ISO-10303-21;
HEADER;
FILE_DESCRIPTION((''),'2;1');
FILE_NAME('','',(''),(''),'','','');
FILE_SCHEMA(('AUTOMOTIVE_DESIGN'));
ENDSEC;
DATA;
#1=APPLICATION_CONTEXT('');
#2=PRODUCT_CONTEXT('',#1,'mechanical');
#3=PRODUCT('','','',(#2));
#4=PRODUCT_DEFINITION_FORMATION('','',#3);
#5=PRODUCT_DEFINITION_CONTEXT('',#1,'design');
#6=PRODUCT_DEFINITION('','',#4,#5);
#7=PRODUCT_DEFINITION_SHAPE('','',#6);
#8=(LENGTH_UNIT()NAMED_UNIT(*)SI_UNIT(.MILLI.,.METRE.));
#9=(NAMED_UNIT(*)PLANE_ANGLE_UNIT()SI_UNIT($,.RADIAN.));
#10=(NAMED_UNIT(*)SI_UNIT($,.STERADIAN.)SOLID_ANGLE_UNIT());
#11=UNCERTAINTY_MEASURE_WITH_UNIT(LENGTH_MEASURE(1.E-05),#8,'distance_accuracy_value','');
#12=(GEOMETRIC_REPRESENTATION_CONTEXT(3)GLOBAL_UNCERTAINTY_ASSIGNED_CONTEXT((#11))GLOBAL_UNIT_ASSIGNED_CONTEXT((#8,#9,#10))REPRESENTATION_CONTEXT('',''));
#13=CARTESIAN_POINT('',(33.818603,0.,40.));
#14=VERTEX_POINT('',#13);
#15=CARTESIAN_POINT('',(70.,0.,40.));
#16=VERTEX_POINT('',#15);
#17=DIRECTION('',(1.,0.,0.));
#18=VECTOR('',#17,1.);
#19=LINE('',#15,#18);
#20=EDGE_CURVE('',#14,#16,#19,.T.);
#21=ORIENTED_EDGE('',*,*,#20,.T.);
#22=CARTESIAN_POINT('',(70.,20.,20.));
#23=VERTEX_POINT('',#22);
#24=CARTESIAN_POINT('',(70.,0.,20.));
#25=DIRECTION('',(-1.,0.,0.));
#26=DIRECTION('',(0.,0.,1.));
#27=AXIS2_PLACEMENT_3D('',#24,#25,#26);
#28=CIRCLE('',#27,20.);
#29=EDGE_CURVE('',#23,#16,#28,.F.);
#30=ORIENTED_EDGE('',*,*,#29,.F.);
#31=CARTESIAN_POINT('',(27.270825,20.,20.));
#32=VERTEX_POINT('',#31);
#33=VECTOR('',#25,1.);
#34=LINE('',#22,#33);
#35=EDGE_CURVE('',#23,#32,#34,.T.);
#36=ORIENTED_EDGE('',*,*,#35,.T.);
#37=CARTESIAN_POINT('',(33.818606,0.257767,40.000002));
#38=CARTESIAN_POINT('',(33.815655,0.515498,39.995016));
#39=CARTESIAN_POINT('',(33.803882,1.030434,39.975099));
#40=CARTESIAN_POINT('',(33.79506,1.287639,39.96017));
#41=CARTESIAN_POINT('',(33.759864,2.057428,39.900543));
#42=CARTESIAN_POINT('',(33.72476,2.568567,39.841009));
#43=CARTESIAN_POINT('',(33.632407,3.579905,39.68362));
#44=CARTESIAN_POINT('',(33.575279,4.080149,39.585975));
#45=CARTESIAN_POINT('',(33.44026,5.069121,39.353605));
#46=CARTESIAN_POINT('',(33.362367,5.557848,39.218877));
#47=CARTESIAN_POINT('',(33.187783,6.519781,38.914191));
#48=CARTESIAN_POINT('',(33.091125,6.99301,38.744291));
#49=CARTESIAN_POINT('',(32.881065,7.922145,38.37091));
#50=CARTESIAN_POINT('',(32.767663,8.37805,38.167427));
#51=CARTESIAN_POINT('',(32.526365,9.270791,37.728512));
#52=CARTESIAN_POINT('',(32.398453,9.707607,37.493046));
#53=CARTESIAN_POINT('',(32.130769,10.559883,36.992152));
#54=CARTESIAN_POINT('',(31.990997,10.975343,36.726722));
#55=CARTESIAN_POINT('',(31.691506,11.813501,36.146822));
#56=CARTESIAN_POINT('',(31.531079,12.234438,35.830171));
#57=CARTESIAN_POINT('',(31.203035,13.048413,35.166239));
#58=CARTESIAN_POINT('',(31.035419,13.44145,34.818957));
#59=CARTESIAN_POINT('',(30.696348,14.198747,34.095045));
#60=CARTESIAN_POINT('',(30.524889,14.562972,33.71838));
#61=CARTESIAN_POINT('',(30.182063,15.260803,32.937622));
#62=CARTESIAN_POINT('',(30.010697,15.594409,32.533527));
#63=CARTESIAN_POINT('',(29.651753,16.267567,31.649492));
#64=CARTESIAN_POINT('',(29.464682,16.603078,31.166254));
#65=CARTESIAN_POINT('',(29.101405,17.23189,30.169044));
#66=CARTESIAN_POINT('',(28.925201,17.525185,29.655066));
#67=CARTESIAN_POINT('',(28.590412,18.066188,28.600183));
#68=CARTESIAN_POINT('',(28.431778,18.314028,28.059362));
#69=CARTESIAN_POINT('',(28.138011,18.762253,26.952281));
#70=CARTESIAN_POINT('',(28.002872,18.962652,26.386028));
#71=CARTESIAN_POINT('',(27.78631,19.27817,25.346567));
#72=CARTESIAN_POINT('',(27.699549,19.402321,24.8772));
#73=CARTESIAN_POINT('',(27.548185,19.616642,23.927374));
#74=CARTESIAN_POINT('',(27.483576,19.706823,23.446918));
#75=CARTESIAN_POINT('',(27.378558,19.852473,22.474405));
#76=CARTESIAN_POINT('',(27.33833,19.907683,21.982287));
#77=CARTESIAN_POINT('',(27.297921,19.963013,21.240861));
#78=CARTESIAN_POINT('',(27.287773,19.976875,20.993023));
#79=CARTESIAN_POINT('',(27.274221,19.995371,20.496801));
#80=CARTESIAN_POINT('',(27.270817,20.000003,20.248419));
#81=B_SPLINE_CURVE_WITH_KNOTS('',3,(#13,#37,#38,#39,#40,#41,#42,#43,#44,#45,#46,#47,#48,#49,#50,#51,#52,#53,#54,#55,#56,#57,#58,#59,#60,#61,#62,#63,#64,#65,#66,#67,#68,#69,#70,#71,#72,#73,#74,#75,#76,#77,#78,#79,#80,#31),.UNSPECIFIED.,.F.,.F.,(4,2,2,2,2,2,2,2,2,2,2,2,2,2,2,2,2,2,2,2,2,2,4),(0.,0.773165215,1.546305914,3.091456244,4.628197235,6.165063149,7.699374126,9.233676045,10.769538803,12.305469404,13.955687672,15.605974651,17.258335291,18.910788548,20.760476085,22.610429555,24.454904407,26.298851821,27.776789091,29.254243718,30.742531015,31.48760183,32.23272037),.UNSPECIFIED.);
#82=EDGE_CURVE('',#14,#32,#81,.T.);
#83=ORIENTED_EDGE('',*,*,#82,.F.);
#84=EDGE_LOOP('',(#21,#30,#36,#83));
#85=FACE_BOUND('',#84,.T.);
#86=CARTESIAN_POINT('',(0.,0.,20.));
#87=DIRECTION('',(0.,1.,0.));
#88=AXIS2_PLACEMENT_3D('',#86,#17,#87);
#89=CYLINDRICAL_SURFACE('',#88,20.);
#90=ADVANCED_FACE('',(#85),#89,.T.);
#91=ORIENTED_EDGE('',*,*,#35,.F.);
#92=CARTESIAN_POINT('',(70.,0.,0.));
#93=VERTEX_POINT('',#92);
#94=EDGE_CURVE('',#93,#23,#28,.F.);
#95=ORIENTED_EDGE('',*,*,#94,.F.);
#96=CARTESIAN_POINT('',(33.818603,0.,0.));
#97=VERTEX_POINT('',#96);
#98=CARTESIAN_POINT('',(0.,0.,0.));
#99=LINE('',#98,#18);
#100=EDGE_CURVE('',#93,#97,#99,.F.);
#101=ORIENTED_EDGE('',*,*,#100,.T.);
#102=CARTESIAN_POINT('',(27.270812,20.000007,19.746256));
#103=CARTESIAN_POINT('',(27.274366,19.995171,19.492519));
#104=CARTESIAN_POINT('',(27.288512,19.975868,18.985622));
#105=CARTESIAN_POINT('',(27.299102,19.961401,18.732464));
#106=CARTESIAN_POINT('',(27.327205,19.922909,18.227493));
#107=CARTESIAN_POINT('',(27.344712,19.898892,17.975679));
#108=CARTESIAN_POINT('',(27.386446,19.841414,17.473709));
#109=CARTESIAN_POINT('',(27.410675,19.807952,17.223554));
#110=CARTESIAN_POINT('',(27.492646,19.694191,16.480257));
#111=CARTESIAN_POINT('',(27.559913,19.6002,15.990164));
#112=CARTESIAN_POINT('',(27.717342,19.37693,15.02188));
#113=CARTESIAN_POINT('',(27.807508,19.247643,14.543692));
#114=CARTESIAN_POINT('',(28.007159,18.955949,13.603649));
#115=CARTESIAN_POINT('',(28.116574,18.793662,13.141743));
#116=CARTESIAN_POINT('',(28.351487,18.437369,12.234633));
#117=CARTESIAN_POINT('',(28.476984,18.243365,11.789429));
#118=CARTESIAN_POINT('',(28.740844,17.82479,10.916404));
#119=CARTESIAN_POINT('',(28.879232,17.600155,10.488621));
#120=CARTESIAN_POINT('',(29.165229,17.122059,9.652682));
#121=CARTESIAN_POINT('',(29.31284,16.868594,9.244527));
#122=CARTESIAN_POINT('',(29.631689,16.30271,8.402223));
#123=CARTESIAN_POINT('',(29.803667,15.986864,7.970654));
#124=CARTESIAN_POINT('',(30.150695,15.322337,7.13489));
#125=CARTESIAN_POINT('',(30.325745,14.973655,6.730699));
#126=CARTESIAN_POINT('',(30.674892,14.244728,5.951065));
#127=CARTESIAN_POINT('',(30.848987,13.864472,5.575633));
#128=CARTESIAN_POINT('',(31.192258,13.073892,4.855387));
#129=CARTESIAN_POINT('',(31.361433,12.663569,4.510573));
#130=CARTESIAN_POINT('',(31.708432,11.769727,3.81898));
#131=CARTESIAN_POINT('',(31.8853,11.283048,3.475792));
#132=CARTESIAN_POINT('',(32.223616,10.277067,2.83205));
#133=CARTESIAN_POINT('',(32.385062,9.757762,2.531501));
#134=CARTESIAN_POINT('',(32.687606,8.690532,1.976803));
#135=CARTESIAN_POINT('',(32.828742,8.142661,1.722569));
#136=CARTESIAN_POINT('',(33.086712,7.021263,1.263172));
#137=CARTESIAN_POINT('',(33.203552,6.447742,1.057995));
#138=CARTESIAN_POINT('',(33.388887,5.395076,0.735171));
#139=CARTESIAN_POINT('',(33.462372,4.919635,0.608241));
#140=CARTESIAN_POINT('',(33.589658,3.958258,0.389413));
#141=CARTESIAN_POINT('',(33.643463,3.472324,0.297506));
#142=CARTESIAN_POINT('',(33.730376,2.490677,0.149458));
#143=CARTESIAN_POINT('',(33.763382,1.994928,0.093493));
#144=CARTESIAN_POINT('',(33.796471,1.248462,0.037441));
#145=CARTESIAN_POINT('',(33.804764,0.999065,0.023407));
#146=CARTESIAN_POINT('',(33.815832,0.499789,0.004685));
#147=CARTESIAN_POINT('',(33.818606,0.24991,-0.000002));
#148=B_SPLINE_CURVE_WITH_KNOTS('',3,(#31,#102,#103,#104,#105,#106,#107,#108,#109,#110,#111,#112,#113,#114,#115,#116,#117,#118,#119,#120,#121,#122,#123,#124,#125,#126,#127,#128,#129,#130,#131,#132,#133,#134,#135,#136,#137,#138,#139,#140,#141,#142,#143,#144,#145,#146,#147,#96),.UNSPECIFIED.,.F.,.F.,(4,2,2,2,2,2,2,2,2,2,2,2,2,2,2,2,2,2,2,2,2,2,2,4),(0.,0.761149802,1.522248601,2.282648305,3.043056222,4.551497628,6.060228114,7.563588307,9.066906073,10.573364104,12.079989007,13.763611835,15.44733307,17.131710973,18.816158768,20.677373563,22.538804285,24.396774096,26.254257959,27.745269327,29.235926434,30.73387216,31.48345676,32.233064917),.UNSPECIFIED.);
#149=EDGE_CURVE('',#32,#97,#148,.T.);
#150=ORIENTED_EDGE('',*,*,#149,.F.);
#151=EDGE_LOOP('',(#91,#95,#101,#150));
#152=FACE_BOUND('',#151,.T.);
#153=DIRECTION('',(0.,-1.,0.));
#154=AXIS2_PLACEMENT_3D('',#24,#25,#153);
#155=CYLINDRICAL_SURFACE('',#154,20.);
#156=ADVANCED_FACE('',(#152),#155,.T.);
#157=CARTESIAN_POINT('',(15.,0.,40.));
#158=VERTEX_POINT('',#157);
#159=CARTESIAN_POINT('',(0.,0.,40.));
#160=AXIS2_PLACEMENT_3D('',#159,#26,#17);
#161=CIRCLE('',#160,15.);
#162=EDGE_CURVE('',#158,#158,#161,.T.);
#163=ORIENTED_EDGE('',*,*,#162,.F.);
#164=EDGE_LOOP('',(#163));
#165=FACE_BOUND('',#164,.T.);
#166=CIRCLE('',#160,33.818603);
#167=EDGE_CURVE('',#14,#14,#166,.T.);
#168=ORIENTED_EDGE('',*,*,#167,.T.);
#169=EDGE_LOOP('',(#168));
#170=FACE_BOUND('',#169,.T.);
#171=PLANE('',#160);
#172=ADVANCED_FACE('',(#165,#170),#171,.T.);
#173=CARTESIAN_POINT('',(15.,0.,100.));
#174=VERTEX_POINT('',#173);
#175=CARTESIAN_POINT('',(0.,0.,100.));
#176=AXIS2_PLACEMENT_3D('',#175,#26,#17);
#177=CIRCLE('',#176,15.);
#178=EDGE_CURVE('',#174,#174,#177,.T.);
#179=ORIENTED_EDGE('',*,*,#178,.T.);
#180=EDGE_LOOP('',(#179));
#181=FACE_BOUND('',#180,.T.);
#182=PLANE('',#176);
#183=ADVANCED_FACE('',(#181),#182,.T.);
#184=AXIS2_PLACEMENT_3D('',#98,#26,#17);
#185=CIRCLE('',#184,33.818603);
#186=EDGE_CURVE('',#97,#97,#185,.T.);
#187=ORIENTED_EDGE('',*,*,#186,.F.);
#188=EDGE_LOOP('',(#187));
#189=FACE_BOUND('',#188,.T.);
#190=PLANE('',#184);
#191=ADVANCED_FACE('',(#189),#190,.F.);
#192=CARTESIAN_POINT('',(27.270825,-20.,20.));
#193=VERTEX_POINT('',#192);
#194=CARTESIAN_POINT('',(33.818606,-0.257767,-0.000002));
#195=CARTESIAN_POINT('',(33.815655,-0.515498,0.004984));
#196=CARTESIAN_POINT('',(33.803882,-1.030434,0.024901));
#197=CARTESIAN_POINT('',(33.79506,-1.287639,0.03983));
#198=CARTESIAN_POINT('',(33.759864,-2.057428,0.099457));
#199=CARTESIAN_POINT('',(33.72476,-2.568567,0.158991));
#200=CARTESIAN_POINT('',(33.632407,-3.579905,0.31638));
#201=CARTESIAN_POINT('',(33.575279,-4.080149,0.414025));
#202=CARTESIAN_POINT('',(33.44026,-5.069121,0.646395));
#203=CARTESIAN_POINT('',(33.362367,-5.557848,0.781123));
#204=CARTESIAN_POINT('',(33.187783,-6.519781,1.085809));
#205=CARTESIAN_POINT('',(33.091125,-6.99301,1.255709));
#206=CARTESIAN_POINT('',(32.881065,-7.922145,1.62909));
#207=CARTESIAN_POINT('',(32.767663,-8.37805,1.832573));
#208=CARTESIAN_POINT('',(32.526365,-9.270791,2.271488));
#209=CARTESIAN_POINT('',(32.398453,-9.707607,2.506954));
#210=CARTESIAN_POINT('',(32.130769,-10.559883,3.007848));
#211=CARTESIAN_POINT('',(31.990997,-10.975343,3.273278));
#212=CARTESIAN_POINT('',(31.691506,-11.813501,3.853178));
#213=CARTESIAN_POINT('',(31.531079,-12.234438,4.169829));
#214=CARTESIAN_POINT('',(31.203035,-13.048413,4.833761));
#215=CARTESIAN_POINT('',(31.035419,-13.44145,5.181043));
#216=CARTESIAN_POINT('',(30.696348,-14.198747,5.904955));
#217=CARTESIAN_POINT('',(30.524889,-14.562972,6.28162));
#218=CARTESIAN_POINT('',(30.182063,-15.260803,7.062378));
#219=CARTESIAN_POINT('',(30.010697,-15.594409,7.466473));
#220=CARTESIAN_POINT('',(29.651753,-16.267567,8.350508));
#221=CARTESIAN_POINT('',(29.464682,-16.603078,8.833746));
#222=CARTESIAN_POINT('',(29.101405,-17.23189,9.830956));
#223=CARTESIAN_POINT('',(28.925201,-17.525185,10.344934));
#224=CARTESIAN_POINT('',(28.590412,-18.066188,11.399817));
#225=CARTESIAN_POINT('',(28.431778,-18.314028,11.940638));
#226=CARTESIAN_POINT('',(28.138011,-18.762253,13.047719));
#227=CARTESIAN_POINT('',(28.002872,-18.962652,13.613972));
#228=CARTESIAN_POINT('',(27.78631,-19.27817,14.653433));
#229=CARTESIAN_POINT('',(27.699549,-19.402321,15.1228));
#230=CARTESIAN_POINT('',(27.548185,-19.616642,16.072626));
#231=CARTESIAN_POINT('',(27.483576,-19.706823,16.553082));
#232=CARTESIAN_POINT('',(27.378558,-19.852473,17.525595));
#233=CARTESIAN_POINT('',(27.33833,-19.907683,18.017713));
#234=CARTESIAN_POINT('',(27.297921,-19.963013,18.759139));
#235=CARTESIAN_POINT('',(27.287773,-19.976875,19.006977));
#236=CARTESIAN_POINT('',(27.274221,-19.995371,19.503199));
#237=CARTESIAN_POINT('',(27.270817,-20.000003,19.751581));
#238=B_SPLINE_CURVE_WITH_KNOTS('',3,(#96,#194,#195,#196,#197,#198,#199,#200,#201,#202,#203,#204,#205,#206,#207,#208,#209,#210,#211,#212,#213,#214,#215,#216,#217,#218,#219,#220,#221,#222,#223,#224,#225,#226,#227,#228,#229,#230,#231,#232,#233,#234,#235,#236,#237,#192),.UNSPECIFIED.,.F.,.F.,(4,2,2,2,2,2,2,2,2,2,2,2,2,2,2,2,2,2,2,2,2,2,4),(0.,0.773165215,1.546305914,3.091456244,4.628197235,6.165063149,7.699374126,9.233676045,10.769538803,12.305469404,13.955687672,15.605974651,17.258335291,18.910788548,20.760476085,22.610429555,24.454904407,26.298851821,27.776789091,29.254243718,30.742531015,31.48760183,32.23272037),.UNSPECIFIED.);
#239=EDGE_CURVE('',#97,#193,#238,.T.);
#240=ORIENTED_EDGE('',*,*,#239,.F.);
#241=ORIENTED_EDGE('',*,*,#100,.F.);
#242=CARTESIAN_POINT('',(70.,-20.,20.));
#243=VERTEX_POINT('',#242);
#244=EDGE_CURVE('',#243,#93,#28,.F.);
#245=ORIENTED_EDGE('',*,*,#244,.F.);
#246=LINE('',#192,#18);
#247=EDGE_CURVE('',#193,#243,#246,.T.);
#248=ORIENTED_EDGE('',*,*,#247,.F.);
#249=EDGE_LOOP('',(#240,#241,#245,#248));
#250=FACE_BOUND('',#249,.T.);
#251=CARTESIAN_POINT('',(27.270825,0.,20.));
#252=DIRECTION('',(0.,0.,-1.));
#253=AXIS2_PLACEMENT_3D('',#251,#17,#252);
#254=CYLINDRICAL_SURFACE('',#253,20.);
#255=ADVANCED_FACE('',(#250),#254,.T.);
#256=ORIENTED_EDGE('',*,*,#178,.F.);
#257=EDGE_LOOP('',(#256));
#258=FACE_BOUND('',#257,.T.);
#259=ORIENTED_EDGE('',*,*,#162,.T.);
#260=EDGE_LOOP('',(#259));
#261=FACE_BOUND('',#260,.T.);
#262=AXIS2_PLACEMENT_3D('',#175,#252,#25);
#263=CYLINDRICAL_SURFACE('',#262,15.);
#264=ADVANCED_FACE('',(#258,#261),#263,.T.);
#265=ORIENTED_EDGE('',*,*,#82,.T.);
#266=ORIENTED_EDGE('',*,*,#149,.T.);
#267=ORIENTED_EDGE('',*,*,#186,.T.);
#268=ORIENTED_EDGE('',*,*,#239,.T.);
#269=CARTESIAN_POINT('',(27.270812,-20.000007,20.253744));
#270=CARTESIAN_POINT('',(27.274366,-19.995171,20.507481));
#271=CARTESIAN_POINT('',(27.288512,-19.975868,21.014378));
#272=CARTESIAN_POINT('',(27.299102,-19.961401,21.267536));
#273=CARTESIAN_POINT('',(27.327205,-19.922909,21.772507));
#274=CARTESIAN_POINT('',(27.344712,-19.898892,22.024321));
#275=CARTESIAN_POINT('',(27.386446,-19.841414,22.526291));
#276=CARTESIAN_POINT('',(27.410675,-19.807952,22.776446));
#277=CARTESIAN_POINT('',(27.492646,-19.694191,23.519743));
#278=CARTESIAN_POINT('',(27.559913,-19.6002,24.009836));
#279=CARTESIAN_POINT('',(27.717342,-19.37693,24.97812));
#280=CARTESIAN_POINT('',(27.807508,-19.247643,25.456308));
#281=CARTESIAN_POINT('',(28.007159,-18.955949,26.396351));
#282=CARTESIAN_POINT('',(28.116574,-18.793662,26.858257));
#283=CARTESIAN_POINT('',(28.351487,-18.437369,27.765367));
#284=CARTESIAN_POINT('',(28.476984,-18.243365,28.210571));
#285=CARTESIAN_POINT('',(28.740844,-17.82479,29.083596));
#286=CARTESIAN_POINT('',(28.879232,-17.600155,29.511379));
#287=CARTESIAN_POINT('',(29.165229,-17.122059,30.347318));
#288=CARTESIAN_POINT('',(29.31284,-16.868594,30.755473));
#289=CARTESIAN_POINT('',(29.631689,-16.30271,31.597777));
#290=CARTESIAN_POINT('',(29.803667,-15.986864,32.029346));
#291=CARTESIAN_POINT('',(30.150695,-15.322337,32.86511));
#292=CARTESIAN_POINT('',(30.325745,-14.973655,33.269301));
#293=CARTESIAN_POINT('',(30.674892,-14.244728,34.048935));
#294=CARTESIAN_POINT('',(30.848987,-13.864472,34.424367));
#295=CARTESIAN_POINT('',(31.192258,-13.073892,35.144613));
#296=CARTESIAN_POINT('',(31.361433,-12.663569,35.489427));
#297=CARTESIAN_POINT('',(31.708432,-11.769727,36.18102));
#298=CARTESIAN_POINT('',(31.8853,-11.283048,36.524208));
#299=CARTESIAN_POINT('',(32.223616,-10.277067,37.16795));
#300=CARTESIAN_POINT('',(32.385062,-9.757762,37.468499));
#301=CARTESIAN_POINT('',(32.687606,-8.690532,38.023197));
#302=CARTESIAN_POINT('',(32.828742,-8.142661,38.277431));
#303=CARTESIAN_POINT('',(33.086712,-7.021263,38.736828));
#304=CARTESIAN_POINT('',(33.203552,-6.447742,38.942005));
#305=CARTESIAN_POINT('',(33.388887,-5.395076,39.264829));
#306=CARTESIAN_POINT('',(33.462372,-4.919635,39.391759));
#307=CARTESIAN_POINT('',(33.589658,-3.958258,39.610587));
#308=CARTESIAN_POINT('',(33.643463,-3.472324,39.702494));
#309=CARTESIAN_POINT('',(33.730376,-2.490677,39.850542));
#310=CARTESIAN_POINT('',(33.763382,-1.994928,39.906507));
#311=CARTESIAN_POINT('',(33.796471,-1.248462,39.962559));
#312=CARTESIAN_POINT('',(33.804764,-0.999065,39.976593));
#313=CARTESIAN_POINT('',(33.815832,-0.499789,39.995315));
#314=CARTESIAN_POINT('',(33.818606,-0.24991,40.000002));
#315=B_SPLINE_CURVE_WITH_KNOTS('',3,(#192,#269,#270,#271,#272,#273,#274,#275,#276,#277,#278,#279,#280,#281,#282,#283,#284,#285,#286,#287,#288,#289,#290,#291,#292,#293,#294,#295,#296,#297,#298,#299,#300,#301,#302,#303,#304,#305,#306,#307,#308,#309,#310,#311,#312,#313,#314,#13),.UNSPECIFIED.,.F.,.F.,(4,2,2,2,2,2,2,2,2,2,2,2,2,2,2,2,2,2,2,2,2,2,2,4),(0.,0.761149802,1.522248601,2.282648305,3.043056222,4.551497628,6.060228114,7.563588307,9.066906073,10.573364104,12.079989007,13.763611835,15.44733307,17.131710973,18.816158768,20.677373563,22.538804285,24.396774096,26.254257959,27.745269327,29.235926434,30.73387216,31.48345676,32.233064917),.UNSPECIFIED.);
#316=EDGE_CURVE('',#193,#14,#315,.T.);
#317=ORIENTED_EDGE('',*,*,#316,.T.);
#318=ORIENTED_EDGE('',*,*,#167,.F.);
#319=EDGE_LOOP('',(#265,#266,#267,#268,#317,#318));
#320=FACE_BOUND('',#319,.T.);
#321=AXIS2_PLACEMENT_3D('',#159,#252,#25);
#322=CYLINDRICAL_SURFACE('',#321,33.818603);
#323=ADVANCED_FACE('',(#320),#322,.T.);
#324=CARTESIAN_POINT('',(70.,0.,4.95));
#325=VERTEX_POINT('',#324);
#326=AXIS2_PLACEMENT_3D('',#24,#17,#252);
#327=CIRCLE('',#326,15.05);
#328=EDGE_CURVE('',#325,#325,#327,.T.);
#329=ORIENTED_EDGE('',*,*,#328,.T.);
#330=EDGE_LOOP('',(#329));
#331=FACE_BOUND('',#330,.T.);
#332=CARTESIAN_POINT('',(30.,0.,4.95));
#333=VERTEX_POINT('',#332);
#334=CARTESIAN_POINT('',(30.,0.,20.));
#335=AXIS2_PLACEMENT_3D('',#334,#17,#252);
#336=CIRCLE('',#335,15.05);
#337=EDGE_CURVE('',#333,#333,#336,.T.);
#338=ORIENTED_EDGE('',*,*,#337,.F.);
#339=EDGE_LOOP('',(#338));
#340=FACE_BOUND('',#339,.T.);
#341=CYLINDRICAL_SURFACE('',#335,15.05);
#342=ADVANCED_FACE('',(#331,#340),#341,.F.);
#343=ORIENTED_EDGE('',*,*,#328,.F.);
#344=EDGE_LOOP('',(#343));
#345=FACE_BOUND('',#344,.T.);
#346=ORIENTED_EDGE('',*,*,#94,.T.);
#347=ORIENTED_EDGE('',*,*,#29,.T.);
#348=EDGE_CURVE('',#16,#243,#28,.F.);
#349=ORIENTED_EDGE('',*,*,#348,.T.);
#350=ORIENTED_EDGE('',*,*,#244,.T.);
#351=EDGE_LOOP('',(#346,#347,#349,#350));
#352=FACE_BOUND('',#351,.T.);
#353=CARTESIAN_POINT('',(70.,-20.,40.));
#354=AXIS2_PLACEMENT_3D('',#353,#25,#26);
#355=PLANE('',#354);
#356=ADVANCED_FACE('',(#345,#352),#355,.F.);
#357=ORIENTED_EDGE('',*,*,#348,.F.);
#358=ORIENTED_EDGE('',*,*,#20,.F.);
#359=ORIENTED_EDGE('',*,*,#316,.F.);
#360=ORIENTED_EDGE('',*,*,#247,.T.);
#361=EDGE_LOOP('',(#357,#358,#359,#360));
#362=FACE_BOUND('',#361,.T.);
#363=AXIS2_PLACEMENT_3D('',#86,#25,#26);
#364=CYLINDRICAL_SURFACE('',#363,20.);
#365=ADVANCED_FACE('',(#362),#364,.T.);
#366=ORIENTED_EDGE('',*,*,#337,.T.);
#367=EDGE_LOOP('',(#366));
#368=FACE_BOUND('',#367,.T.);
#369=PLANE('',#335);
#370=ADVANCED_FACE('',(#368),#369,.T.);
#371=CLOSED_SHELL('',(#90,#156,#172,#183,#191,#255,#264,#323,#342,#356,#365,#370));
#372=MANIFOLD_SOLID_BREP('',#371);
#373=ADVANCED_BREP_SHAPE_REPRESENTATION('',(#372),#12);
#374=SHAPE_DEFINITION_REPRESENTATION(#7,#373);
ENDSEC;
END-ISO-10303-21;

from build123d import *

# Parameters (mm, degrees)
BOSS_EXTRUDE1_DEPTH = 40
SKETCH2_R           = 15.05
CUT_EXTRUDE1_DEPTH  = 40
FILLET1_R           = 20
SKETCH3_R           = 15
BOSS_EXTRUDE2_DEPTH = 60


with BuildPart() as part:
    # Sketch1 → Boss-Extrude1 (new body)
    with BuildSketch(Plane.XY):
        with BuildLine():
            Line((27.270825141, -20), (70, -20))
            Line((70, -20), (70, 20))
            Line((70, 20), (27.270825141, 20))
            ThreePointArc((27.270825141, 20), (-33.818602926, 0), (27.270825141, -20))
        make_face()
    extrude(amount=BOSS_EXTRUDE1_DEPTH)

    # Sketch2 → Cut-Extrude1 (cut)
    with BuildSketch(Plane(origin=(70, 0, 0), x_dir=(0, 0, -1), z_dir=(1, 0, 0))):
        with Locations((-20, 0)):
            Circle(SKETCH2_R)
    extrude(amount=-CUT_EXTRUDE1_DEPTH, mode=Mode.SUBTRACT)

    # Fillet1
    fillet1_edges = [part.edges().sort_by_distance(p)[0] for p in [
        (48.635412571, 20, 40),
        (48.635412571, -20, 40),
        (48.635412571, -20, 0),
        (48.635412571, 20, 0),
    ]]
    fillet(fillet1_edges, radius=FILLET1_R - 0.0001)  # a hair under: the kernel refuses the full size

    # Sketch3 → Boss-Extrude2 (add)
    with BuildSketch(Plane.XY.offset(40)):
        Circle(SKETCH3_R)
    extrude(amount=BOSS_EXTRUDE2_DEPTH)


solid = part.part
